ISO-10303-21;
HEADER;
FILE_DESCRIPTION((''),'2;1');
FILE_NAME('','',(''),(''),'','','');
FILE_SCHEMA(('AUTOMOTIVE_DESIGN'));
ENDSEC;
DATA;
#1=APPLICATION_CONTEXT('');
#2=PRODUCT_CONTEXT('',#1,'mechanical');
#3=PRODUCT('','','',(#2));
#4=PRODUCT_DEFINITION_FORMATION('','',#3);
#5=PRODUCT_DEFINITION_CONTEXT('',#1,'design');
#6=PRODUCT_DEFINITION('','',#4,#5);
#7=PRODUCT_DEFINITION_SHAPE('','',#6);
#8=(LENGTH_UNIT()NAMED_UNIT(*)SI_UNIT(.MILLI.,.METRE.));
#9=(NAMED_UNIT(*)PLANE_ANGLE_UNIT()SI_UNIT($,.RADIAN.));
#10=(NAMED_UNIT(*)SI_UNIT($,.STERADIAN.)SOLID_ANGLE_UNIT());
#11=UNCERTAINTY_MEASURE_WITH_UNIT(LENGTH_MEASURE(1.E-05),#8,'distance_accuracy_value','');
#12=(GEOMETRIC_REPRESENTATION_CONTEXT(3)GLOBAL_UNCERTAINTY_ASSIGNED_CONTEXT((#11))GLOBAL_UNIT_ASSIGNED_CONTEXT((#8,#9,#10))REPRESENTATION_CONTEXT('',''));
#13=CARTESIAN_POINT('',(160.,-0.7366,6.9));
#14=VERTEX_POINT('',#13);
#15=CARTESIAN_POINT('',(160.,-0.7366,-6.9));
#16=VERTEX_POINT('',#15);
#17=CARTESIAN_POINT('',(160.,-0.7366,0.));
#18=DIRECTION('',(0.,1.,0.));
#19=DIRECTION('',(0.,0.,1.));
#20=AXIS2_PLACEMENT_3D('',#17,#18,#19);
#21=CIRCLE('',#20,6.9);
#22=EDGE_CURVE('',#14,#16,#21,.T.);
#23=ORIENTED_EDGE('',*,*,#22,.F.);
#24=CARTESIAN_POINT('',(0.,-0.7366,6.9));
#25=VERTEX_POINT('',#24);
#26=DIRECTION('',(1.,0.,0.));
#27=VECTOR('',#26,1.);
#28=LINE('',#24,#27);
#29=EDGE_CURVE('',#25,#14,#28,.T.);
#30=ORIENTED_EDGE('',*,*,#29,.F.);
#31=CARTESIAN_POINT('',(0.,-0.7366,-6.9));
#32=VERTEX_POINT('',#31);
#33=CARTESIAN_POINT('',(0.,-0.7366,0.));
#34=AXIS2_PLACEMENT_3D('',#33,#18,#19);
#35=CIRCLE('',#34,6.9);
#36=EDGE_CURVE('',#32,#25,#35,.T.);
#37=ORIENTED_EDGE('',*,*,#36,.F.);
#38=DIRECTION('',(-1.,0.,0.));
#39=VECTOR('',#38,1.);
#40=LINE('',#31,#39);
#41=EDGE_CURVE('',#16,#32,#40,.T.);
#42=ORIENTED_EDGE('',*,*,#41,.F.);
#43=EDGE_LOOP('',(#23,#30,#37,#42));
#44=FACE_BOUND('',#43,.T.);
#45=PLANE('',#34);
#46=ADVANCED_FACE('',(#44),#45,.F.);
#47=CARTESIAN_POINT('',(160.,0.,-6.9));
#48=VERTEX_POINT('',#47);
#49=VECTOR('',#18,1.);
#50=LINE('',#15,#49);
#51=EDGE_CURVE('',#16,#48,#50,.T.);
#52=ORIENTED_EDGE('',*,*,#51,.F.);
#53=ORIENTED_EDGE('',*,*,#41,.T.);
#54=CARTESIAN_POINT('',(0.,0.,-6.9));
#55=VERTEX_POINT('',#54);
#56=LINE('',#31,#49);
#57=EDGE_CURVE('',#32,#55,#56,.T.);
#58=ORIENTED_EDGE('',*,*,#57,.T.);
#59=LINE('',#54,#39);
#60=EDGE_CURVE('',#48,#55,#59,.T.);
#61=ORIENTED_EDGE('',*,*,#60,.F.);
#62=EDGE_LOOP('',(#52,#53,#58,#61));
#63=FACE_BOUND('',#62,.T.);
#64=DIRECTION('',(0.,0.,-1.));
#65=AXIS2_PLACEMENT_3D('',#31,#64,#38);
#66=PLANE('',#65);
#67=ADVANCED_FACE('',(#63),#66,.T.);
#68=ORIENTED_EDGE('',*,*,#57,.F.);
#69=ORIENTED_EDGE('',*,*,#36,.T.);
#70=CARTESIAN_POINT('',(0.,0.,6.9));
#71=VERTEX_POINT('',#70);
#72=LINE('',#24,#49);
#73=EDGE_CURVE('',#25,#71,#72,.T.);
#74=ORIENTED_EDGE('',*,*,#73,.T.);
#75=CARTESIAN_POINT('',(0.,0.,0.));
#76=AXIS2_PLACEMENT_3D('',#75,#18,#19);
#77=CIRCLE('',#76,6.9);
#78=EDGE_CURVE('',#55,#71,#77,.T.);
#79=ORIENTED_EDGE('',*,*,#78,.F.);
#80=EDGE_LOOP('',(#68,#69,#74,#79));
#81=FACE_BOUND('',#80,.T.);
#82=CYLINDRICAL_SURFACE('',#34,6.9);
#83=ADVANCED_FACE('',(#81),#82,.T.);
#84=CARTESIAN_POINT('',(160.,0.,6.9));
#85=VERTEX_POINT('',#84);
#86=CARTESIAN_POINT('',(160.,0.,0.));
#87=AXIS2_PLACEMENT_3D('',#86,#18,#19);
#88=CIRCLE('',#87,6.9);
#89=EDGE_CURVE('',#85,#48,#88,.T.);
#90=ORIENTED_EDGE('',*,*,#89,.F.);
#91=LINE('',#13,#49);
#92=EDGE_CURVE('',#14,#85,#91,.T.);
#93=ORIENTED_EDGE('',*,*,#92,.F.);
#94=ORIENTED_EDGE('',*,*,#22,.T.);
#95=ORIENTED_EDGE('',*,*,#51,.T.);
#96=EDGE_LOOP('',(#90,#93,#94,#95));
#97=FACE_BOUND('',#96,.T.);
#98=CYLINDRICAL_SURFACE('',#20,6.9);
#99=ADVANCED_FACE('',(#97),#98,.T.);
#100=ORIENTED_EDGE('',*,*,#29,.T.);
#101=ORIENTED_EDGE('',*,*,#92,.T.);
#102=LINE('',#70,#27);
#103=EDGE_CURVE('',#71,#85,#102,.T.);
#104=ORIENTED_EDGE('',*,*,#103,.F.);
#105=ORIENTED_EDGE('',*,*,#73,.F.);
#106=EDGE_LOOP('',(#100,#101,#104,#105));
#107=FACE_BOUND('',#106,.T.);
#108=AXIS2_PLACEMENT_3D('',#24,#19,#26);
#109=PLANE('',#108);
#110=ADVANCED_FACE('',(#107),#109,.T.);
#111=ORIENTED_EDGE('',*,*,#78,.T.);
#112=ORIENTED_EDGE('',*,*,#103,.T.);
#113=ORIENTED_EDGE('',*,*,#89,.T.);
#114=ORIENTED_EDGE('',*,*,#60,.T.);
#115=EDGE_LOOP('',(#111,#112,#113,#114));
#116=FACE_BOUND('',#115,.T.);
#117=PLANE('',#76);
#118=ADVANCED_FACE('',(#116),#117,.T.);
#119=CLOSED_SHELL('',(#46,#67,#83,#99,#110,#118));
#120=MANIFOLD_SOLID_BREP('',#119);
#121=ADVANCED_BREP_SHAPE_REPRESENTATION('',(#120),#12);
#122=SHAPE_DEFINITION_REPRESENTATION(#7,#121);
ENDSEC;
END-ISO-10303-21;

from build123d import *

# Parameters (mm, degrees)
BASE_FLANGE1_DEPTH = 0.7366


# Sheet-metal steps are written as plain solids
with BuildPart() as part:
    # Sketch1 → Base-Flange1 (new body)
    with BuildSketch(Plane(origin=(0, 0, 0), x_dir=(1, 0, 0), z_dir=(0, 1, 0))):
        with BuildLine():
            Line((0, 6.9), (160, 6.9))
            ThreePointArc((160, 6.9), (166.9, 0), (160, -6.9))
            Line((160, -6.9), (0, -6.9))
            ThreePointArc((0, -6.9), (-6.9, 0), (0, 6.9))
        make_face()
    extrude(amount=-BASE_FLANGE1_DEPTH)


solid = part.part
